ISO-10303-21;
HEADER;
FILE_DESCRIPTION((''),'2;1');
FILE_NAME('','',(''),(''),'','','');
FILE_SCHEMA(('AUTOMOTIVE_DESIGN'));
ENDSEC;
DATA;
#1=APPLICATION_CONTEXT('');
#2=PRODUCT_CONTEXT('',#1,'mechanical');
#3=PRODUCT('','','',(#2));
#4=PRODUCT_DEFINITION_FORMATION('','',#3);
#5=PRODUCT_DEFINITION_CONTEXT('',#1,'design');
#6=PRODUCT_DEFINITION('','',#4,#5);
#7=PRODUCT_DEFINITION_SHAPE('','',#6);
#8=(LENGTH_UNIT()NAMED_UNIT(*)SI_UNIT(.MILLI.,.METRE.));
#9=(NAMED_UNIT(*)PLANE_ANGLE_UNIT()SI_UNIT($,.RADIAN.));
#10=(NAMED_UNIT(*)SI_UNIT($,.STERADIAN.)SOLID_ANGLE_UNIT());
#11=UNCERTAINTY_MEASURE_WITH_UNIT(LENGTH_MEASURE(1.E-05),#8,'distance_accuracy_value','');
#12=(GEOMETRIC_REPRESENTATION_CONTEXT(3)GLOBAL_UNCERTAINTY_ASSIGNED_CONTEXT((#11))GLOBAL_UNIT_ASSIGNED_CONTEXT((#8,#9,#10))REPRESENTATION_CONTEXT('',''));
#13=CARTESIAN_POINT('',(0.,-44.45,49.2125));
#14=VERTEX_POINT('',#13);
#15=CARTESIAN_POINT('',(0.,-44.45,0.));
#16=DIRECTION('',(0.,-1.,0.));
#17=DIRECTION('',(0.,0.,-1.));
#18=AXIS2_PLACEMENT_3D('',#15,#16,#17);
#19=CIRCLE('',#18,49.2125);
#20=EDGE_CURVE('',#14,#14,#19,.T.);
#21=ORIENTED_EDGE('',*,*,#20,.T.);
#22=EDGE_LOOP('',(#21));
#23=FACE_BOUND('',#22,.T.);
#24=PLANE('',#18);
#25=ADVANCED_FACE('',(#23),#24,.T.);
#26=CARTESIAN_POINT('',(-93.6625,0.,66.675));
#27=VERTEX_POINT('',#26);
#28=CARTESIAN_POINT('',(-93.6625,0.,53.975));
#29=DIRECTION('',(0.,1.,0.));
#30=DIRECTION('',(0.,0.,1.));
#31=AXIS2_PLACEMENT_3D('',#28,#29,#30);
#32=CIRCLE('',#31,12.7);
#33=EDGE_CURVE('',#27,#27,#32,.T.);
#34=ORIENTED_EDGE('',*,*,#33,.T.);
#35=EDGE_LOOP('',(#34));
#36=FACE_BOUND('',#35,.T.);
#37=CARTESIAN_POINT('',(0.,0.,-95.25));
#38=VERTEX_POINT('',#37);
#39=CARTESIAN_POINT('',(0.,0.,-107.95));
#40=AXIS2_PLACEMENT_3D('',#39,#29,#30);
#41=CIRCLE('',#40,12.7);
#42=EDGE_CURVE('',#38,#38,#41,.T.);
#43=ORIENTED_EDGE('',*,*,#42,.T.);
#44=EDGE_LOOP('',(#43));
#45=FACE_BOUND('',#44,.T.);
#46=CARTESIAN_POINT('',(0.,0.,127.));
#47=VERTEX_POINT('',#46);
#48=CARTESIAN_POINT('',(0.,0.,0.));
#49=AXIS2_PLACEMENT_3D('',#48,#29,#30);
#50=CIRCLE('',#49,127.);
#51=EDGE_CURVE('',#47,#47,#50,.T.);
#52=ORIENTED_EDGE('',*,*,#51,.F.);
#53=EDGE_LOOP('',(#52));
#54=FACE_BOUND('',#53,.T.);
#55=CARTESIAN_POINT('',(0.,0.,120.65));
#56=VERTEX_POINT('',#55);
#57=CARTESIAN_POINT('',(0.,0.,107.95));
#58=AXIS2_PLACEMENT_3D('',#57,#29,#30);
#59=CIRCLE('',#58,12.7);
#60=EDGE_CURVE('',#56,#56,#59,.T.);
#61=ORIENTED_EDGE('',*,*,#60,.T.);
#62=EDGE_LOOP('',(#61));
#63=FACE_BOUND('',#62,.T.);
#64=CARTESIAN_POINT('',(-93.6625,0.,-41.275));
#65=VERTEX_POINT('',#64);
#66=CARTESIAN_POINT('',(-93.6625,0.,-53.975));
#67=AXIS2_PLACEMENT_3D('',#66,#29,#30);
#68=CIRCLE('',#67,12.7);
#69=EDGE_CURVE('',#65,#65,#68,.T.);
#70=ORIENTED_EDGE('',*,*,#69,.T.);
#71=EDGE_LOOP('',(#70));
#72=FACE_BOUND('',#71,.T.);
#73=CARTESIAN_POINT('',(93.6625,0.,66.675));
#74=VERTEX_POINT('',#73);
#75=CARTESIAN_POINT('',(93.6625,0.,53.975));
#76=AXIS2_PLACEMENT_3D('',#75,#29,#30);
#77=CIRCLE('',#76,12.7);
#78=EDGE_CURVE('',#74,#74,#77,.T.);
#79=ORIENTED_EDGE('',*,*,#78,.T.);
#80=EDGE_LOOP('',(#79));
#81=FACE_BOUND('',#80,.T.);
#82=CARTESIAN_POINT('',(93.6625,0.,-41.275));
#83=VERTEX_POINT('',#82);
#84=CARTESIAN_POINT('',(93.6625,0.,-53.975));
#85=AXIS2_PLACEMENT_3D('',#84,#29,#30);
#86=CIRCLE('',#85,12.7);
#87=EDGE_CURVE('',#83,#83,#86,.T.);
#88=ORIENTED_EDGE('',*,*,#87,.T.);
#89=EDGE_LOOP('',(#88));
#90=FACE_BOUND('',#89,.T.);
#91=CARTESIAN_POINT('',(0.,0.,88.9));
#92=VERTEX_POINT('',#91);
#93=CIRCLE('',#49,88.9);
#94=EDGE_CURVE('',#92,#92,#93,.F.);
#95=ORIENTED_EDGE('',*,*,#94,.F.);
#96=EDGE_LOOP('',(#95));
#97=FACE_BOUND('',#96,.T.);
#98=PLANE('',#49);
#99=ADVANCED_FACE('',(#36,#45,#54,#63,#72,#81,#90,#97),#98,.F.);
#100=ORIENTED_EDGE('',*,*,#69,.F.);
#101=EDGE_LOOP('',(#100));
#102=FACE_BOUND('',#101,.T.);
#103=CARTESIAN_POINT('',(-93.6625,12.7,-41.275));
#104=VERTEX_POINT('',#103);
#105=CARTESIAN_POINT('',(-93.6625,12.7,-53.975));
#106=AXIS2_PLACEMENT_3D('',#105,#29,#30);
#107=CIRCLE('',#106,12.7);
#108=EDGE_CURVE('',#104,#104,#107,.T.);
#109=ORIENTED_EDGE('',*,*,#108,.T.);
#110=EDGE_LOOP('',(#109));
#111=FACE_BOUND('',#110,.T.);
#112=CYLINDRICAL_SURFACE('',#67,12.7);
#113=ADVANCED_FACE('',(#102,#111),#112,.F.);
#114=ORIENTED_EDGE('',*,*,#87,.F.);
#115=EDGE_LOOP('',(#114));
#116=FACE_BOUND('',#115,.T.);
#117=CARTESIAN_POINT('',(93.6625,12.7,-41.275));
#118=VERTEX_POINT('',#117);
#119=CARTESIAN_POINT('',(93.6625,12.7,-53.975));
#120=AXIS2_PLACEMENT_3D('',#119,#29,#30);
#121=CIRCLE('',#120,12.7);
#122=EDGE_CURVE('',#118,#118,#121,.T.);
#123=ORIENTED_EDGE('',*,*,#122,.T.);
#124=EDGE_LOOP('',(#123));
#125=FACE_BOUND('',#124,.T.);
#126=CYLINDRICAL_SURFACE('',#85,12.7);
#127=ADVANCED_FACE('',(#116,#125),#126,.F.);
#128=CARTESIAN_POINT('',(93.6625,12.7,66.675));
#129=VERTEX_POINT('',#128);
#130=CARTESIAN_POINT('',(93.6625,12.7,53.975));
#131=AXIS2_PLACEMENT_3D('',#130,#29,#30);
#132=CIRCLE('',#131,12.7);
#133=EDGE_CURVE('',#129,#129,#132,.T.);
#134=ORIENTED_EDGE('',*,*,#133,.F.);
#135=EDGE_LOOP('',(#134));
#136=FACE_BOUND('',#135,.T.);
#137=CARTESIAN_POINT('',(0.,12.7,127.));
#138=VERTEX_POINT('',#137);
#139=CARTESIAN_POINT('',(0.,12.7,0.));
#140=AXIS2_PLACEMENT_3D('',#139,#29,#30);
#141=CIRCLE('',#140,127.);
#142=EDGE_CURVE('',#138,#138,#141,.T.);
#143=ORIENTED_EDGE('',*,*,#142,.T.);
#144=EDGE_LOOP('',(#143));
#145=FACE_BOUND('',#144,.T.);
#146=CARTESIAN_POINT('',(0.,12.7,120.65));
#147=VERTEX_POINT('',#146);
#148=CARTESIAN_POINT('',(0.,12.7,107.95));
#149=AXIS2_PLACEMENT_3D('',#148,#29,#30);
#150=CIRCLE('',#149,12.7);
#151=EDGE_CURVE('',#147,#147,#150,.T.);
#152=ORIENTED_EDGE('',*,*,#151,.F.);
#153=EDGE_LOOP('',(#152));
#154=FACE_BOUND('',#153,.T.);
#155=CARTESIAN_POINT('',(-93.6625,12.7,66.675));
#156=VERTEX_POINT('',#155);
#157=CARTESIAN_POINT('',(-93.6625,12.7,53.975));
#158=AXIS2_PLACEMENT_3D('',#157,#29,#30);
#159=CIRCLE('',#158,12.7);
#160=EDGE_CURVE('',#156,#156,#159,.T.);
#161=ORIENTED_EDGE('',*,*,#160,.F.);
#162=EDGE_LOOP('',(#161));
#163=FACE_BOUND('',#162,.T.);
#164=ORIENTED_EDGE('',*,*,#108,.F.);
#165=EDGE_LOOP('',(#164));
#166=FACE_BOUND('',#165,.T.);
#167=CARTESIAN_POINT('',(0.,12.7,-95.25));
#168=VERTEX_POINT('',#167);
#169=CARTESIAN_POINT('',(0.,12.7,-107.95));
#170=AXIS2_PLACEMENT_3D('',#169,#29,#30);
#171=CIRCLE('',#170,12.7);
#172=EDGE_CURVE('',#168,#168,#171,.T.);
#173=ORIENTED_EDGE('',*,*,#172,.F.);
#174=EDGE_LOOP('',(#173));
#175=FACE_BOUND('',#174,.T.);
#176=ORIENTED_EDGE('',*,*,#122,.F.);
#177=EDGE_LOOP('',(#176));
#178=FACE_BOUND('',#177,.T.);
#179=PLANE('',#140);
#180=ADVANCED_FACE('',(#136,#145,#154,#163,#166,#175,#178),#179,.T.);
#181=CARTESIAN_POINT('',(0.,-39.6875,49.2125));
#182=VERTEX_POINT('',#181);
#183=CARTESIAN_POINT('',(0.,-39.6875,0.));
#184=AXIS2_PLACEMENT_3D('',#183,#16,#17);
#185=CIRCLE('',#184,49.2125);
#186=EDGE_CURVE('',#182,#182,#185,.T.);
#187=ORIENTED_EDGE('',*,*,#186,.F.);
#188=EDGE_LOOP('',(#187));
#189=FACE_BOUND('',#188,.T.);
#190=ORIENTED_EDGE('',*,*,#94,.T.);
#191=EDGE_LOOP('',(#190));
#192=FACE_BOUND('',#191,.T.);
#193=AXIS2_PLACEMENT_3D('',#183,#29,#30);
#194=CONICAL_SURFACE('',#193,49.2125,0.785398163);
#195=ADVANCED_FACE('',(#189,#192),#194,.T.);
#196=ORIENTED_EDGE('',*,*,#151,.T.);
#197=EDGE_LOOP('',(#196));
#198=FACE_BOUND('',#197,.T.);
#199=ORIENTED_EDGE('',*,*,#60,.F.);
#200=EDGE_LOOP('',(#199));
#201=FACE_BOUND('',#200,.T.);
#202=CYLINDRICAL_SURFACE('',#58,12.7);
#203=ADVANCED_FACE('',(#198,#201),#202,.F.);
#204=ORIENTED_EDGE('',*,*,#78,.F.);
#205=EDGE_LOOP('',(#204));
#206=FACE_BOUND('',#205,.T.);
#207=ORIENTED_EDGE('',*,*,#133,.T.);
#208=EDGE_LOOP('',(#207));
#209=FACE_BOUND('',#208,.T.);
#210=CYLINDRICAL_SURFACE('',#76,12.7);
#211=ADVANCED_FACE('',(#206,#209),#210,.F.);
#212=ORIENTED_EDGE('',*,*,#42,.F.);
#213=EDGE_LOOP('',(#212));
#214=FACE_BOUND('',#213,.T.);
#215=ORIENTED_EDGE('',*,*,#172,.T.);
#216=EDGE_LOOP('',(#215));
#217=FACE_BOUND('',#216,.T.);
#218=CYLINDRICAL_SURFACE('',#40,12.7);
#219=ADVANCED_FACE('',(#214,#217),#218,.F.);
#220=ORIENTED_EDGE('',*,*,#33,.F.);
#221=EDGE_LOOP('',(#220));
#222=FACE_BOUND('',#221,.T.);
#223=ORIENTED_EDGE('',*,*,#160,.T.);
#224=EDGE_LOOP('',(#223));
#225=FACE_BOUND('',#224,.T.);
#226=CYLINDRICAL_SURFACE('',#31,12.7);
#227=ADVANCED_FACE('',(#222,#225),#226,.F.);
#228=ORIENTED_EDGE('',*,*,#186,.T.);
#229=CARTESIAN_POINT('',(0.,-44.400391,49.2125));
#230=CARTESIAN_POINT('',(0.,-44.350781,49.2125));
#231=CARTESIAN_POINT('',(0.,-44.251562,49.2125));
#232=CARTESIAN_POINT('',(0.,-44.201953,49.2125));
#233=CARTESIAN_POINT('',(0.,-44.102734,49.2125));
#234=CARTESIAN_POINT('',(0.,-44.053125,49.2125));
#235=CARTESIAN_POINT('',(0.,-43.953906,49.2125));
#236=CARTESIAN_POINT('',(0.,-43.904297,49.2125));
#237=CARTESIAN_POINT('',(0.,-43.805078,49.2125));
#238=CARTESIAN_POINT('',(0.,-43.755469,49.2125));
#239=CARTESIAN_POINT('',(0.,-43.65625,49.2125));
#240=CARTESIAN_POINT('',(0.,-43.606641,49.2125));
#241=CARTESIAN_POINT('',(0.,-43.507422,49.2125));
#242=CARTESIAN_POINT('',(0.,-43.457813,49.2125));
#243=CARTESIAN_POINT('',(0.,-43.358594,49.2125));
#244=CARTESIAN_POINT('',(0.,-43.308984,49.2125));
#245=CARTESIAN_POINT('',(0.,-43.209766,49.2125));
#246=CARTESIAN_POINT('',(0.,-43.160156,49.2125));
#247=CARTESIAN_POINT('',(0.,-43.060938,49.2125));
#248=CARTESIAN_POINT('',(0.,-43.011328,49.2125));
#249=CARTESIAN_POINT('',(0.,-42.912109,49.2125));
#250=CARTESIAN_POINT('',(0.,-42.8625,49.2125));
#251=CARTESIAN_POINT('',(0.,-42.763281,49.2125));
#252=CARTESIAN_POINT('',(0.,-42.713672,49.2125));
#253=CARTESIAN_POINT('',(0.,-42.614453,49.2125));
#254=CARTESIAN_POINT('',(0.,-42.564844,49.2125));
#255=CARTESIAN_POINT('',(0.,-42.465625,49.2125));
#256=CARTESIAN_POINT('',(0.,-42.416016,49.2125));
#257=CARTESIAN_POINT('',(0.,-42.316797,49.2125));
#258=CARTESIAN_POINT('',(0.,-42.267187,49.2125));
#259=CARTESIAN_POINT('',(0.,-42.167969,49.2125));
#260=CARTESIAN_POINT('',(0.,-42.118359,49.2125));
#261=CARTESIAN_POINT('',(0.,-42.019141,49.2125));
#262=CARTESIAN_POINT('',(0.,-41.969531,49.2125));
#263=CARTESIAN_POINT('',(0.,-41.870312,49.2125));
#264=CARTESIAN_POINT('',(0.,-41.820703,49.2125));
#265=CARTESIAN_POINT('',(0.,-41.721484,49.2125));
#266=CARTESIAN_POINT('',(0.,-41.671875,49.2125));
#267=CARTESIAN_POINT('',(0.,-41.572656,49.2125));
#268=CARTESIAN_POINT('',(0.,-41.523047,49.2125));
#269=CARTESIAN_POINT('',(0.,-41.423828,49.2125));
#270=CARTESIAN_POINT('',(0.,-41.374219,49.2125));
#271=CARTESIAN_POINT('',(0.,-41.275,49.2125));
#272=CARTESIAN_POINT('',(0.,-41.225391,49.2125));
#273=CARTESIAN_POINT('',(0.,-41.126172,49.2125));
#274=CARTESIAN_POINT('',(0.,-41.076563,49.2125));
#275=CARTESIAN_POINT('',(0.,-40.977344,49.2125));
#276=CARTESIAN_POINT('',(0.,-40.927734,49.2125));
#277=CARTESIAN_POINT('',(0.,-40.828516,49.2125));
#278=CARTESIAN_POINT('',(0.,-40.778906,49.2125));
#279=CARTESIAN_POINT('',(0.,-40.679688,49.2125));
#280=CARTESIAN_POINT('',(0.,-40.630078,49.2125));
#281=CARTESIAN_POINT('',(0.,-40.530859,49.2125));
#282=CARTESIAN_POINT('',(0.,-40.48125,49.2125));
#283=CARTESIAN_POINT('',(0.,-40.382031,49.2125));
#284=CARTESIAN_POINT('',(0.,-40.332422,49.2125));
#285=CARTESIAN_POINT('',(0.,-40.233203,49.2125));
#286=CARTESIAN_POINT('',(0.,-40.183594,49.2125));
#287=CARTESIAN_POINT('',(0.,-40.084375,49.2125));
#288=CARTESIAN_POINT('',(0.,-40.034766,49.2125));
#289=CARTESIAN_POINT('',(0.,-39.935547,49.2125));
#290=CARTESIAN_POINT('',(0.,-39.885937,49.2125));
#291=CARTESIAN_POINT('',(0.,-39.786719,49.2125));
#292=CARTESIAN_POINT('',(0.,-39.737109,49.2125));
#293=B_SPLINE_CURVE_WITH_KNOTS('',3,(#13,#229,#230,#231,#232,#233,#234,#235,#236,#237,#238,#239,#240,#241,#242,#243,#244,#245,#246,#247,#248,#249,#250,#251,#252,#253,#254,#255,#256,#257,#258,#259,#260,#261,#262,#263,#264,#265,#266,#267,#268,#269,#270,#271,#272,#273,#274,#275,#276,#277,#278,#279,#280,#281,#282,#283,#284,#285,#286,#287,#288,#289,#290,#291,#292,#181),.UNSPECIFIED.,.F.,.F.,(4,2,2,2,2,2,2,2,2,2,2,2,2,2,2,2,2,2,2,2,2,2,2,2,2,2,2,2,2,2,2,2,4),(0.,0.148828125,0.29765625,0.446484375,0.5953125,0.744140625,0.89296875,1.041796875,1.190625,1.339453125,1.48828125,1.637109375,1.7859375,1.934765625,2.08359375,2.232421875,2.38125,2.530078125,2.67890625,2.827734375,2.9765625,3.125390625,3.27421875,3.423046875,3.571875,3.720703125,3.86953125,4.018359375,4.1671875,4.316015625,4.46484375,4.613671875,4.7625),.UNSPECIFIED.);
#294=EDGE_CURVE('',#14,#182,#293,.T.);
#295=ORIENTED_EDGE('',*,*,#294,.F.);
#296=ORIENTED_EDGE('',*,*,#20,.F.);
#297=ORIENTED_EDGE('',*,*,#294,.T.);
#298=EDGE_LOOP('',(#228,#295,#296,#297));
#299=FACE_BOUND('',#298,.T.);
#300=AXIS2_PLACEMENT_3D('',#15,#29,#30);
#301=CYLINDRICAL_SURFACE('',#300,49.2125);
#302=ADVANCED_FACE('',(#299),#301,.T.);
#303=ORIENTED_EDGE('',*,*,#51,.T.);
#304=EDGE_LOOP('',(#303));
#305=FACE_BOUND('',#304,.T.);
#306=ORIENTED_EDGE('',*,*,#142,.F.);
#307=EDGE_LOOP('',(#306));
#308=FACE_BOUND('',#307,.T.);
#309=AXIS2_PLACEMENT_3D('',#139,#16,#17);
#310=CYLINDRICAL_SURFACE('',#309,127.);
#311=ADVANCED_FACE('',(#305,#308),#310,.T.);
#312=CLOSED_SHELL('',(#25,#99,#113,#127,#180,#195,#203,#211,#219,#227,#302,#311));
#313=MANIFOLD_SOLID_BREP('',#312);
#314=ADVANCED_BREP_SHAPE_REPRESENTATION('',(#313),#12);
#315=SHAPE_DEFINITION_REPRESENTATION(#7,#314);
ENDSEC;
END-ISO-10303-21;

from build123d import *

# Parameters (mm, degrees)
SKETCH1_R           = 127
BOSS_EXTRUDE1_DEPTH = 12.7
SKETCH2_R           = 12.7
CUT_EXTRUDE1_DEPTH  = 12.7
SKETCH3_R           = 88.9
BOSS_EXTRUDE2_DEPTH = 39.6875
CHAMFER2_SIZE       = 39.6875
SKETCH4_R           = 49.2125
BOSS_EXTRUDE3_DEPTH = 4.7625


with BuildPart() as part:
    # Sketch1 → Boss-Extrude1 (new body)
    with BuildSketch(Plane(origin=(0, 0, 0), x_dir=(1, 0, 0), z_dir=(0, 1, 0))):
        with Locations(Location((0, 0, 0), (0, 0, 270))):
            Circle(SKETCH1_R)
    extrude(amount=BOSS_EXTRUDE1_DEPTH)

    # Sketch2 → Cut-Extrude1 (cut)
    with BuildSketch(Plane(origin=(0, 12.7, 0), x_dir=(1, 0, 0), z_dir=(0, 1, 0))):
        with Locations(Location((0, 107.95, 0), (0, 0, 270))):
            Circle(SKETCH2_R)
        with Locations(Location((0, -107.95, 0), (0, 0, 270))):
            Circle(SKETCH2_R)
        with Locations(Location((93.6625, -53.975, 0), (0, 0, 270))):
            Circle(SKETCH2_R)
        with Locations(Location((93.6625, 53.975, 0), (0, 0, 270))):
            Circle(SKETCH2_R)
        with Locations(Location((-93.6625, 53.975, 0), (0, 0, 270))):
            Circle(SKETCH2_R)
        with Locations(Location((-93.6625, -53.975, 0), (0, 0, 270))):
            Circle(SKETCH2_R)
    extrude(amount=-CUT_EXTRUDE1_DEPTH, mode=Mode.SUBTRACT)

    # Sketch3 → Boss-Extrude2 (add)
    with BuildSketch(Plane(origin=(0, 0, 0), x_dir=(-1, 0, 0), z_dir=(0, -1, 0))):
        with Locations(Location((0, 0, 0), (0, 0, 270))):
            Circle(SKETCH3_R)
    extrude(amount=BOSS_EXTRUDE2_DEPTH)

    # Chamfer2
    chamfer2_edges = [part.edges().sort_by_distance(p)[0] for p in [
        (0, -39.6875, -88.9),
    ]]
    chamfer(chamfer2_edges, length=CHAMFER2_SIZE - 0.0001)  # a hair under: the kernel refuses the full size

    # Sketch4 → Boss-Extrude3 (add)
    with BuildSketch(Plane.XZ.offset(39.6875)):
        with Locations(Location((0, 0, 0), (0, 0, 90))):
            Circle(SKETCH4_R)
    extrude(amount=BOSS_EXTRUDE3_DEPTH)


solid = part.part
